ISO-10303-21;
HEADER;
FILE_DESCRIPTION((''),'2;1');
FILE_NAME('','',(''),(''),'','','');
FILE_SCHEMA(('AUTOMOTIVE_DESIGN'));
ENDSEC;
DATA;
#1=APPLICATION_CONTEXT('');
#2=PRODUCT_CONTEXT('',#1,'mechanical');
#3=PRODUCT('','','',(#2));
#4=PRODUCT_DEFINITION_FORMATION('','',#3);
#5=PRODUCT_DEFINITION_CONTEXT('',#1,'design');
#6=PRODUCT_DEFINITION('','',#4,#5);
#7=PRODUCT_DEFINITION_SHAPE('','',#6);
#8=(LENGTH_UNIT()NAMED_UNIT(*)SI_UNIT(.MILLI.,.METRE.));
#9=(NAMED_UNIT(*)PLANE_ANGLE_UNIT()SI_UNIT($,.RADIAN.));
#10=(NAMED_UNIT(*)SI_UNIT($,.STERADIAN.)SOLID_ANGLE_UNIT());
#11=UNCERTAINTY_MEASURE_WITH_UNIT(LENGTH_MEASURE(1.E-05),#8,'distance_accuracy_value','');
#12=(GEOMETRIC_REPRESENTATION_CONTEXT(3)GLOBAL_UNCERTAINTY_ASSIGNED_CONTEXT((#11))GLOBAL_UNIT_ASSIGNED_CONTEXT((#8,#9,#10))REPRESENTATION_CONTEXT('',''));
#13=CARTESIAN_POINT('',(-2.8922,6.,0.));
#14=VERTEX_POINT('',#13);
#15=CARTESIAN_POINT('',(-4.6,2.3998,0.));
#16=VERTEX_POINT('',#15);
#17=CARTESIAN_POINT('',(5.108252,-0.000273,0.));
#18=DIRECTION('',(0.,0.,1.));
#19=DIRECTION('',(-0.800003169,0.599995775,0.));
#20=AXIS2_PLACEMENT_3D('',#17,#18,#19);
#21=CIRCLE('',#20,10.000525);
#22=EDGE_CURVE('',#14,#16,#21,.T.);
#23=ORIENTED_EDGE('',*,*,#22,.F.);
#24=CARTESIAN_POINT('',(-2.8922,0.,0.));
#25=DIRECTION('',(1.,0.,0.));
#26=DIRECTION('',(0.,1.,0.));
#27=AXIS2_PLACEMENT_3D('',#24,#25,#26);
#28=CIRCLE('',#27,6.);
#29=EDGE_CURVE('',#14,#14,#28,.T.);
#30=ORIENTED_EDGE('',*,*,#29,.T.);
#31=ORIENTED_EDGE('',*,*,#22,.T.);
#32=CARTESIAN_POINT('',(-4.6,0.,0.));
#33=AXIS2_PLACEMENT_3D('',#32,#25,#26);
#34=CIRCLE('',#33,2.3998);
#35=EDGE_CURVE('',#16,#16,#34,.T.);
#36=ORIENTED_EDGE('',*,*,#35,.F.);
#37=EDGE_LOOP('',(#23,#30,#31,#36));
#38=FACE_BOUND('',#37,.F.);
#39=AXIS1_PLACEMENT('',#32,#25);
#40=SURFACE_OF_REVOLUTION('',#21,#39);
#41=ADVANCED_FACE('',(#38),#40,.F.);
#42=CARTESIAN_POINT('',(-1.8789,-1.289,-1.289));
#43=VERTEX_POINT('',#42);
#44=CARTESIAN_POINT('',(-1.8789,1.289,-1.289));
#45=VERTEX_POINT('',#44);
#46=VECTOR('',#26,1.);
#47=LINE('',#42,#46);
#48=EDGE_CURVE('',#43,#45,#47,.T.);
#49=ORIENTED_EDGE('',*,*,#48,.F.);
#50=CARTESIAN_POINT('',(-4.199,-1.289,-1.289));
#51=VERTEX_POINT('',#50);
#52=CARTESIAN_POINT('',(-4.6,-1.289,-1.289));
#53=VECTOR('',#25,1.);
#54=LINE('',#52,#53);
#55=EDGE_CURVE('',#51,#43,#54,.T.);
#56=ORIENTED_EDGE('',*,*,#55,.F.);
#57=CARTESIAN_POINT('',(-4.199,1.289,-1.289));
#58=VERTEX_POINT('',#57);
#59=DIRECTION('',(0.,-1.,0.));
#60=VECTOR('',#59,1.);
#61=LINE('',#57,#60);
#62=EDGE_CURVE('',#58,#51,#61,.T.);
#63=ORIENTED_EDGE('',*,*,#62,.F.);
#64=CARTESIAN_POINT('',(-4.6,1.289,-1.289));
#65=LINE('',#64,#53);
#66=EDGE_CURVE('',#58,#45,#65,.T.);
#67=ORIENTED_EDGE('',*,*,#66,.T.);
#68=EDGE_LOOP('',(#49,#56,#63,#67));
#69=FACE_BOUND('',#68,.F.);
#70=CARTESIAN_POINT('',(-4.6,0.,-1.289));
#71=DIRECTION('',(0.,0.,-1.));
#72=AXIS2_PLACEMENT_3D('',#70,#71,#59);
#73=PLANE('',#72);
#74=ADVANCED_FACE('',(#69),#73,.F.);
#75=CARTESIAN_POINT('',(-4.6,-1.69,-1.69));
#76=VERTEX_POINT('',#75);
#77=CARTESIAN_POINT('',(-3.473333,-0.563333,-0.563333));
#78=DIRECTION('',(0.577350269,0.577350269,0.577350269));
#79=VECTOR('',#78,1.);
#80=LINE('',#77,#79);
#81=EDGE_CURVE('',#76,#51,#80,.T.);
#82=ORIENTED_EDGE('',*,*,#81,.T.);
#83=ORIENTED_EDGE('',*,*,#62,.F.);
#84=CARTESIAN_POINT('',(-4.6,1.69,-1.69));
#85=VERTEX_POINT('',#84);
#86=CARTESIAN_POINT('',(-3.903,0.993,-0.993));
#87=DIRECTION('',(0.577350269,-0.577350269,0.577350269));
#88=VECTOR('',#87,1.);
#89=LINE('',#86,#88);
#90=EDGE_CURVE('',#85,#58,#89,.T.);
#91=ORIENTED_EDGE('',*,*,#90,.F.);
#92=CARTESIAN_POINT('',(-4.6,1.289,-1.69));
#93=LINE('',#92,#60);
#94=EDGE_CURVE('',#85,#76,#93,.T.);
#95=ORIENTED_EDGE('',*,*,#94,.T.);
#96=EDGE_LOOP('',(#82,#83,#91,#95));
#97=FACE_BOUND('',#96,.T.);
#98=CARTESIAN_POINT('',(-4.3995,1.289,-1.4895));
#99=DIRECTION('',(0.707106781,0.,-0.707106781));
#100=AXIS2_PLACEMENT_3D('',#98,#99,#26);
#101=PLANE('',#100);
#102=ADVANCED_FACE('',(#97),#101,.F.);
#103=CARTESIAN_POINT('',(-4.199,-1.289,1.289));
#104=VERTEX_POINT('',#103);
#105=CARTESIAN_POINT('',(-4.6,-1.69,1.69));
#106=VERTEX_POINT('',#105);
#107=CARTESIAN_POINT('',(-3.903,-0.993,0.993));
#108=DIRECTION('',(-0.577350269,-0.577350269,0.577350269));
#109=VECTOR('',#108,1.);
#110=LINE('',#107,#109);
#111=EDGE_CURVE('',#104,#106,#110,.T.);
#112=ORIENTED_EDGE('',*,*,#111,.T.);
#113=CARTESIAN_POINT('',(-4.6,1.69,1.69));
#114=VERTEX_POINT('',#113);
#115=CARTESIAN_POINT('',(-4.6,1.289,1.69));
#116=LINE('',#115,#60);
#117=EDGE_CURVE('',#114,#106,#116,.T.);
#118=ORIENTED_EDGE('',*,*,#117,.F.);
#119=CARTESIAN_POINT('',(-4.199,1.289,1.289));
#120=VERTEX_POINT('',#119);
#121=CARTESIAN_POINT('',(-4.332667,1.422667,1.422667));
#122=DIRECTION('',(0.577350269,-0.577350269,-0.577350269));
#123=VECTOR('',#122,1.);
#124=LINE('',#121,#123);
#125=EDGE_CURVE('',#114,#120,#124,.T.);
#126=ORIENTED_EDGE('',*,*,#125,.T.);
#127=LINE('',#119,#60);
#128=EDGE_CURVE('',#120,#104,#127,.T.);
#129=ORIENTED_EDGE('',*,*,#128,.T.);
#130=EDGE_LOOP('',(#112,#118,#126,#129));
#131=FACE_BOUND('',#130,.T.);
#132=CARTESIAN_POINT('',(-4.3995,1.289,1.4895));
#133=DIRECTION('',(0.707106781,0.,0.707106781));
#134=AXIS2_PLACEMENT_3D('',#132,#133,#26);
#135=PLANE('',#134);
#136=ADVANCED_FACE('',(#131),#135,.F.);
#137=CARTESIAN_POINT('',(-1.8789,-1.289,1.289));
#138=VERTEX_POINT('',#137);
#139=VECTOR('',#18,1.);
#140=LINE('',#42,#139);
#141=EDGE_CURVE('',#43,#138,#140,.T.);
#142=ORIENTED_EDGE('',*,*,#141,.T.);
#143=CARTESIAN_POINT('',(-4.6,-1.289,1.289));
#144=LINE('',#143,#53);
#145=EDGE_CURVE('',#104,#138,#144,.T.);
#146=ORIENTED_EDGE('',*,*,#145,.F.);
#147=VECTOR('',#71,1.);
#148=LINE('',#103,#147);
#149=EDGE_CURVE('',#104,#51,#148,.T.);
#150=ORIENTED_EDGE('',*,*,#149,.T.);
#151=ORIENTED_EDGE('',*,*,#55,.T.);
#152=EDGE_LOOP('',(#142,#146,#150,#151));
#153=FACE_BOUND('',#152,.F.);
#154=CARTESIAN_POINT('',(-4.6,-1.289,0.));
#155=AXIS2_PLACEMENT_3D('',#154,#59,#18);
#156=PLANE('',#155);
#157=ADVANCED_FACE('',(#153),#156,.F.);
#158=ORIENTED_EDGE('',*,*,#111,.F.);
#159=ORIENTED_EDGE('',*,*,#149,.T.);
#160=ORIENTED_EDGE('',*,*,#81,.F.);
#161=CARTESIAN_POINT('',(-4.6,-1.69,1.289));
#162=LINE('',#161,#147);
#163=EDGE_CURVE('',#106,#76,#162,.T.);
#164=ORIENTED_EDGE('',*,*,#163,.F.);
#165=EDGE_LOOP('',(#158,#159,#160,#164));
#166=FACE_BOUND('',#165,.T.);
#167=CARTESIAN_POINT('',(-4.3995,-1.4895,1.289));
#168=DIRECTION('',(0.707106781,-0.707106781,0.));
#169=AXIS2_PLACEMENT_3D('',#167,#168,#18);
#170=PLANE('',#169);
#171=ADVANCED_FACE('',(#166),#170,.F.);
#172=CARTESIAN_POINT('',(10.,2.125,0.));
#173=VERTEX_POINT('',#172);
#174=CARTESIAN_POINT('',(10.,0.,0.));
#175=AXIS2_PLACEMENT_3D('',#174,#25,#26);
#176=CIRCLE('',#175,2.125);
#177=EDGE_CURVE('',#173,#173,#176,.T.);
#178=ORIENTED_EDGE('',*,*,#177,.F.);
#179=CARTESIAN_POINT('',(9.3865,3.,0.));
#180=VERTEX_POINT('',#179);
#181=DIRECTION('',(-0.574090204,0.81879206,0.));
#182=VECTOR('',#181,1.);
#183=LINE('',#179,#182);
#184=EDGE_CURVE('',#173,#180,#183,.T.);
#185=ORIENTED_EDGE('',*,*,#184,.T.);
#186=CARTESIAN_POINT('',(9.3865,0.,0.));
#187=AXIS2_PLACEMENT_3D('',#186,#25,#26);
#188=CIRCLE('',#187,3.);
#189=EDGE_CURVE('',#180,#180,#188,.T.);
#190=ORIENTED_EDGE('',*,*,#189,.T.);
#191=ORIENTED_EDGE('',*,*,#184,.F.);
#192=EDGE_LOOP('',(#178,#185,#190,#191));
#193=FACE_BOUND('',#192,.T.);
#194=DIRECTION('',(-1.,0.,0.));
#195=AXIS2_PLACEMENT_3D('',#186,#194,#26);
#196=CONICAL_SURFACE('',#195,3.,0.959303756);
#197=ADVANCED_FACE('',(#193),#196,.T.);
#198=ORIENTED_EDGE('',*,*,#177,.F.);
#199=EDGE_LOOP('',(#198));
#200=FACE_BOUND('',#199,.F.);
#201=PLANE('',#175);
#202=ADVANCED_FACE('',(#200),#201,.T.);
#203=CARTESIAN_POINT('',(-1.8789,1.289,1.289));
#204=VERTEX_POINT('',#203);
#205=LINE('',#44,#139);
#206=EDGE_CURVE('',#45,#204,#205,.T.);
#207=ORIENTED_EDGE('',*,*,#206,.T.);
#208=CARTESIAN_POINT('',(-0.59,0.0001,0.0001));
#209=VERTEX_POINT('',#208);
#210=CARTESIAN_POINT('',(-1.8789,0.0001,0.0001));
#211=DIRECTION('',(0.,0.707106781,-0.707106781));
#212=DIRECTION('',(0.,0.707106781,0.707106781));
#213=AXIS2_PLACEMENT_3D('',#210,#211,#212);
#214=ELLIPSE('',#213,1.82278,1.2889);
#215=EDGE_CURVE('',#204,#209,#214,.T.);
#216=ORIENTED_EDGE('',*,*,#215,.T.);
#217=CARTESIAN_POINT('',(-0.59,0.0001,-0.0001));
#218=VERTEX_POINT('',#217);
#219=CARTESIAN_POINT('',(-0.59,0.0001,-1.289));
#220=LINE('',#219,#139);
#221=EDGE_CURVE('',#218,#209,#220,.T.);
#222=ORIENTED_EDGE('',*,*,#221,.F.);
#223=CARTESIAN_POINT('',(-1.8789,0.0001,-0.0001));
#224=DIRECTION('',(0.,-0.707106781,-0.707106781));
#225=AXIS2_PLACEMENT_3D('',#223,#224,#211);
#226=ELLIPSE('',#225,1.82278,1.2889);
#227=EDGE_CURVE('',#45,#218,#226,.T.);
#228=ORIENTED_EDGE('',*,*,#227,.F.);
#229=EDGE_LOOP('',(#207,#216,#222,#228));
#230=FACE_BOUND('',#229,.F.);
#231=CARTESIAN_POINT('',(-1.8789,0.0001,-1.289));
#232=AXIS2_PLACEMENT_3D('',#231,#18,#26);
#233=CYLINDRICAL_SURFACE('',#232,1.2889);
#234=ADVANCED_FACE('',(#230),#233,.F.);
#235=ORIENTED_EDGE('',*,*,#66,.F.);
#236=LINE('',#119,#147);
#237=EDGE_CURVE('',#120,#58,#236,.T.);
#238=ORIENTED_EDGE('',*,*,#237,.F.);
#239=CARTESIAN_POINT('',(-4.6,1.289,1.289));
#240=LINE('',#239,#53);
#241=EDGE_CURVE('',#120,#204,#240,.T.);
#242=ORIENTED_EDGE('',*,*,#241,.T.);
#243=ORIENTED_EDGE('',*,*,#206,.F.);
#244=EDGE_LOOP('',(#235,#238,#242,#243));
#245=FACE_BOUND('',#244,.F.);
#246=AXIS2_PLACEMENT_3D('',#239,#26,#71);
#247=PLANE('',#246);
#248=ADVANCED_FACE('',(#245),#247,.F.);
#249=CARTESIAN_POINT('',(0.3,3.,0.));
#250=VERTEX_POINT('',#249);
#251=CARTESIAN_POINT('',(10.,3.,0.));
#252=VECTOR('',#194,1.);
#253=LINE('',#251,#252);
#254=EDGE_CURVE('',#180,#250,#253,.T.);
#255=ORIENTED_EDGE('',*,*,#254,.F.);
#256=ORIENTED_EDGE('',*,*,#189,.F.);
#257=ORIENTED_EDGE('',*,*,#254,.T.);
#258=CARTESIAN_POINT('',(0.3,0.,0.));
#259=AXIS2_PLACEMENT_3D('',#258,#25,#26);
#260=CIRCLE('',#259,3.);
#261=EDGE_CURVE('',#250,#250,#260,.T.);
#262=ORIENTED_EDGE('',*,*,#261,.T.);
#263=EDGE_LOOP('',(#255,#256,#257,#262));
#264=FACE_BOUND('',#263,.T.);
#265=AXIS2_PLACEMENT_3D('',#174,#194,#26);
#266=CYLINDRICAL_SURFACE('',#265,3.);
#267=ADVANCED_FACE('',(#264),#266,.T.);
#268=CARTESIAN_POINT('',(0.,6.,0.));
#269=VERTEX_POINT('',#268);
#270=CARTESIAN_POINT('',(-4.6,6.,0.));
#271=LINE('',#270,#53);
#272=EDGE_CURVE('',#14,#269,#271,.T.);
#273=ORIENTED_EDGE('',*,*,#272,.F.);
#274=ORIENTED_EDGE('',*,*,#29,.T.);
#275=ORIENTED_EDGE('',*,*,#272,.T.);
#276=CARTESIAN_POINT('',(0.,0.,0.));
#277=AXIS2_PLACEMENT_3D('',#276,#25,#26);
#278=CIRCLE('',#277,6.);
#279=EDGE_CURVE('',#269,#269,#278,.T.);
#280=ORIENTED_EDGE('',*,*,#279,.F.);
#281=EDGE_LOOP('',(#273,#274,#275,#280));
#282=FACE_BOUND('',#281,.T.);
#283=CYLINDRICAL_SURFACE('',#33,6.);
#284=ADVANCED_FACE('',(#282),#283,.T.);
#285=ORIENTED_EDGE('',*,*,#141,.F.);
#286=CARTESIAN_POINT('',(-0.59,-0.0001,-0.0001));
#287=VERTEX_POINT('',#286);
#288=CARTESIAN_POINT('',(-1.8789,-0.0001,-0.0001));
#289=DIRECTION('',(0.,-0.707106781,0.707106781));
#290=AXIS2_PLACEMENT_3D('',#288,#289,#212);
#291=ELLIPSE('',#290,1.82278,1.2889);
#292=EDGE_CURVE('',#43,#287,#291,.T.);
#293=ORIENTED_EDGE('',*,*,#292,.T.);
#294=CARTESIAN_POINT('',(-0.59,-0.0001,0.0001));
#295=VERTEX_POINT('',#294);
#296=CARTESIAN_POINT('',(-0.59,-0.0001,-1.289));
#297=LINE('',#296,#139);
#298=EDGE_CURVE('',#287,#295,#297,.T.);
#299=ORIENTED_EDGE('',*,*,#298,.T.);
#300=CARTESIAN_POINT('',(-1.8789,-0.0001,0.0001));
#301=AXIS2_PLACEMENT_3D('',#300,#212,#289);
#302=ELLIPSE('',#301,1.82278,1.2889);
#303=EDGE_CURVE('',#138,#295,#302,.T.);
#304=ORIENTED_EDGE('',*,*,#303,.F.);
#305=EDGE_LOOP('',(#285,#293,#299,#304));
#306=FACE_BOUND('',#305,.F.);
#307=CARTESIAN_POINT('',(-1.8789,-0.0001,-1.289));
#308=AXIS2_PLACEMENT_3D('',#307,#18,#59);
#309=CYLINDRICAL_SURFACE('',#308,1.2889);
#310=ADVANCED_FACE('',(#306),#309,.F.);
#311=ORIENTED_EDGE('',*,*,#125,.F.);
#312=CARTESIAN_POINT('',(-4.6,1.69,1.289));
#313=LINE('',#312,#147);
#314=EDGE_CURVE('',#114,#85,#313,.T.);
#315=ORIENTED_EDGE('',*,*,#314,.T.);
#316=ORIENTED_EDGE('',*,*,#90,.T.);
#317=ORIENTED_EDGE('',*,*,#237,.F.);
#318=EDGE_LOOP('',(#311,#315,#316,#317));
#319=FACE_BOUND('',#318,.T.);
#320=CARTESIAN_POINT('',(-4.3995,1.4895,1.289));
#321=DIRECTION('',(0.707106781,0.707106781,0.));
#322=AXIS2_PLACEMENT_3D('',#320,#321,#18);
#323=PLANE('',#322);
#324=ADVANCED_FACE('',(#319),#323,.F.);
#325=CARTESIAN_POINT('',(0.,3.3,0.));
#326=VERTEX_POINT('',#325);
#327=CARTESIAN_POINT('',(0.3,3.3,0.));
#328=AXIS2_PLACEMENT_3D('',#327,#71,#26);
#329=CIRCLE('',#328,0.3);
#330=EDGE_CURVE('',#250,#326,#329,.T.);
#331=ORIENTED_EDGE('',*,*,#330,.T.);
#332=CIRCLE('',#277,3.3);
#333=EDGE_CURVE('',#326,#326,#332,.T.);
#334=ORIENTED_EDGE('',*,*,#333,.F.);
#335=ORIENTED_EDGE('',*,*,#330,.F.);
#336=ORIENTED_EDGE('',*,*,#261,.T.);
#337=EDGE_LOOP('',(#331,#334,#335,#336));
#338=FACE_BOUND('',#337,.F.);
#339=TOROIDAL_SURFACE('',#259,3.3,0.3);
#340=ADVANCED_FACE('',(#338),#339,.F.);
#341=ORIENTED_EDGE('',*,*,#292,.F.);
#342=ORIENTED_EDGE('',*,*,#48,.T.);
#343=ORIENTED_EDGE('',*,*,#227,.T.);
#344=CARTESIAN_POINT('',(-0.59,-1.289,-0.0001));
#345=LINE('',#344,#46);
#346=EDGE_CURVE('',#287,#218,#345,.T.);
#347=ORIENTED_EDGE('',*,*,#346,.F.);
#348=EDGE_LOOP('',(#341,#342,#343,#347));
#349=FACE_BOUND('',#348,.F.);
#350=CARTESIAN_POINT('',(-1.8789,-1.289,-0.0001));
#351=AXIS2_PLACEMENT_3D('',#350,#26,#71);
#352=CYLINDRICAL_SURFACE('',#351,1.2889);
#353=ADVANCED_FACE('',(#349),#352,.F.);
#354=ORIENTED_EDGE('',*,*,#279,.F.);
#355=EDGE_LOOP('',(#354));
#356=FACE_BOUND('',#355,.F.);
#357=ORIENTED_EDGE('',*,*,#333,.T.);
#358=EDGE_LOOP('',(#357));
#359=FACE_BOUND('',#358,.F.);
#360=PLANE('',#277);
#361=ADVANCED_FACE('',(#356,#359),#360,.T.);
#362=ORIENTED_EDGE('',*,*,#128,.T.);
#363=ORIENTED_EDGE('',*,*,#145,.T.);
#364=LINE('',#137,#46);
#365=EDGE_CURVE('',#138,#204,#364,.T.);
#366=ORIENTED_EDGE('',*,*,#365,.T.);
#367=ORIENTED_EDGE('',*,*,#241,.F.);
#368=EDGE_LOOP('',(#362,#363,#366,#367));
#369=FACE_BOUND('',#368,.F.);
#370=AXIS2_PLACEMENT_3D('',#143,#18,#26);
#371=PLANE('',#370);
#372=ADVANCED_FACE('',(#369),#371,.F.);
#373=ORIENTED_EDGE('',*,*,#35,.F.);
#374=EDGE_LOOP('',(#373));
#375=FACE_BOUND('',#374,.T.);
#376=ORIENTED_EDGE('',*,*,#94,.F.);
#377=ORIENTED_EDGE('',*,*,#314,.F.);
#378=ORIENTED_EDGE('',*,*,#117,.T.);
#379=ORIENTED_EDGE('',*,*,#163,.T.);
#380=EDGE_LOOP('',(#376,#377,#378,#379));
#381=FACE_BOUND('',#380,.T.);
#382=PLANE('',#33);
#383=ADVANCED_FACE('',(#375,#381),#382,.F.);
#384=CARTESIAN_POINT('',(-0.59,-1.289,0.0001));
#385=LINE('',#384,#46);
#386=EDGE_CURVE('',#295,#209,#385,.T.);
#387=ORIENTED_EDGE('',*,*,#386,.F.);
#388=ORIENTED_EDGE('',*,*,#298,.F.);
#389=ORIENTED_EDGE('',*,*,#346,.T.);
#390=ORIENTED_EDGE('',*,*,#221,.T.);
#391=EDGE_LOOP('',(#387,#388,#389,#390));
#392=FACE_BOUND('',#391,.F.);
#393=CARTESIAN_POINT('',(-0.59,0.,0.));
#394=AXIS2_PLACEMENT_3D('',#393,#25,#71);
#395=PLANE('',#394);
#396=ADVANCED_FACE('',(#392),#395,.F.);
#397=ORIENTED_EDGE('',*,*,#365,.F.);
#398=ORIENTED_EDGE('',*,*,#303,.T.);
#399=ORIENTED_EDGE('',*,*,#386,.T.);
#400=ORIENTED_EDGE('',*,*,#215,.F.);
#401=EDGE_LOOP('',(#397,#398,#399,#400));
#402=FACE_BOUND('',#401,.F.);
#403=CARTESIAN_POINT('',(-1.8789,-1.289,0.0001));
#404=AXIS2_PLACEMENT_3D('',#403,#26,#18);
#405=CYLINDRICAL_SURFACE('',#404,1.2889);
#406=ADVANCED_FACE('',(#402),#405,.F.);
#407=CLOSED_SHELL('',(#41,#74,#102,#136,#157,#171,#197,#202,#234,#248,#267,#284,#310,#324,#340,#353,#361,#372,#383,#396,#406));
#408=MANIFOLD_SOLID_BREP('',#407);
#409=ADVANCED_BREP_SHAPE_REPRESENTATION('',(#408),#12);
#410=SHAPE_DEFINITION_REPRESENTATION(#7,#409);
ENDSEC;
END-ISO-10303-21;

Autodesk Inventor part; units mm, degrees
ref_plane "YZ Plane" through (0, 0, 0) normal (1, 0, 0) x (0, 1, 0)
sketch "Sketch1" plane through (0, 0, 0) normal (0, 0, 1) x (1, 0, 0)
  line L0 (-0.59, 0) -> (10, 0)
  line L1 (10, 0) -> (10, 3)
  line L2 (10, 3) -> (0, 3)
  line L3 (0, 3) -> (0, 6)
  line L4 (-8.1003, 0) -> (13.0167, 0) projected
  line L5 (0, -1.2172) -> (0, 7.3031) projected
  line L6 (-4.6, 2.3998) -> (-5.0836, 2.3998) construction
  line L7 (-4.6, 0) -> (-0.59, 0)
  line L8 (0, 0) -> (-0.59, 0)
  line L9 (-4.6, 0) -> (-4.6, 6)
  arc A0 (-2.8922, 6) -> (-4.6, 2.3998) centre (5.1078, 0) ccw
  line L10 (-4.6, 6) -> (0, 6)
  dimension "d0" = 10
  dimension "d1" = 6
  dimension "d2" = 12
  dimension "d4" = 4.7996
  dimension "d13" = 4.6
  dimension "d14" = 4.01
  dimension "d46" = 10
  dimension "d47" = 0
revolve "Body" add sketch "Sketch1" angle 360 about axis through (-0.59, 0, 0) along (1, 0, 0) contours L4 L9 A0 L10 L3 L5 L0 | L5 L2 L1 L0
ref_plane "IDS_WORKPLANE{1}" through (-4.6, 0, 0) normal (1, 0, 0) x (0, 0, -1)
sketch "Sketch2" plane through (-4.6, 0, 0) normal (1, 0, 0) x (0, 0, -1)
  line L0 (0, -8.4) -> (0, 8.4) projected
  line L1 (8.4, 0) -> (-8.4, 0) projected
  line L2 (-1.289, 1.289) -> (1.289, 1.289)
  line L3 (1.289, 1.289) -> (1.289, -1.289)
  line L4 (1.289, -1.289) -> (-1.289, -1.289)
  line L5 (-1.289, -1.289) -> (-1.289, 1.289)
  line L6 (0, 1.289) -> (0, -1.289) construction
  line L7 (-1.289, 0) -> (1.289, 0) construction
  dimension "d7" = 2.578
  dimension "d9" = 2.578
extrude "Extrusion" cut sketch "Sketch2" along normal blind 4.01
fillet "Fillet1" radius 1.289 4 edges at (-0.59, 0, -1.289) (-0.59, -1.289, 0) (-0.59, 0, 1.289) (-0.59, 1.289, 0)
chamfer "Chamfer1" distance 0.401 angle 45 4 edges at (-4.6, 1.289, 0) (-4.6, 0, -1.289) (-4.6, -1.289, 0) (-4.6, 0, 1.289)
thread "Thread" size "M6x1" class "6g" standard "ISO Metric profile" length 9
chamfer "Chamfer2" distance 0.875 distance2 0.6135 1 edges at (10, -3, 0) measured on face at (10, 0.705, 0.3049)
ref_plane "Work Plane2" through (69.85, 0, 0) normal (0, 0, -1) x (1, 0, 0)
fillet "Fillet2" radius 0.3 1 edges at (0, -3, 0)
equation "\"d0\" = NLG"
equation "\"d1\" = GD"
equation "\"d2\" = KOD"
equation "\"d4\" = 1.42 * KOM"
equation "\"d13\" = KOH"
equation "\"d14\" = STI"
equation "\"d46\" = KR"
equation "\"d7\" = KOM - 0.2 * STI"
equation "\"d9\" = KOM - 0.2 * STI"
equation "\"d48\" = STI"
equation "\"d50\" = -0.1 * STI + 0.5 * KOM"
equation "\"d51\" = 0.1 * STI"
equation "\"d18\" = GEL"
equation "\"d20\" = -0.5 * SPD + 0.5 * GD"
equation "\"d21\" = GUL"
equation "\"d44\" = R"
equation "\"GD\" = 6"
equation "\"NLG\" = 10"
equation "\"GEL\" = 9"
equation "\"KOD\" = 12"
equation "\"KOH\" = 4.6"
equation "\"SPD\" = 4.25"
equation "\"KR\" = 10"
equation "\"RR\" = 2"
equation "\"GUL\" = 0.61345 * PTC"
equation "\"KEWI\" = 0"
equation "\"SDM\" = 3.38"
equation "\"STI\" = 4.01"
equation "\"d6\" = -KOH"
equation "\"R\" = 0.3"
equation "\"KOM\" = 3.38"
equation "\"PTC\" = 1"
properties part number "ANSI B18.6.7M - M6x1 x 10, SRPHMSTIM" material "Steel, Mild"
